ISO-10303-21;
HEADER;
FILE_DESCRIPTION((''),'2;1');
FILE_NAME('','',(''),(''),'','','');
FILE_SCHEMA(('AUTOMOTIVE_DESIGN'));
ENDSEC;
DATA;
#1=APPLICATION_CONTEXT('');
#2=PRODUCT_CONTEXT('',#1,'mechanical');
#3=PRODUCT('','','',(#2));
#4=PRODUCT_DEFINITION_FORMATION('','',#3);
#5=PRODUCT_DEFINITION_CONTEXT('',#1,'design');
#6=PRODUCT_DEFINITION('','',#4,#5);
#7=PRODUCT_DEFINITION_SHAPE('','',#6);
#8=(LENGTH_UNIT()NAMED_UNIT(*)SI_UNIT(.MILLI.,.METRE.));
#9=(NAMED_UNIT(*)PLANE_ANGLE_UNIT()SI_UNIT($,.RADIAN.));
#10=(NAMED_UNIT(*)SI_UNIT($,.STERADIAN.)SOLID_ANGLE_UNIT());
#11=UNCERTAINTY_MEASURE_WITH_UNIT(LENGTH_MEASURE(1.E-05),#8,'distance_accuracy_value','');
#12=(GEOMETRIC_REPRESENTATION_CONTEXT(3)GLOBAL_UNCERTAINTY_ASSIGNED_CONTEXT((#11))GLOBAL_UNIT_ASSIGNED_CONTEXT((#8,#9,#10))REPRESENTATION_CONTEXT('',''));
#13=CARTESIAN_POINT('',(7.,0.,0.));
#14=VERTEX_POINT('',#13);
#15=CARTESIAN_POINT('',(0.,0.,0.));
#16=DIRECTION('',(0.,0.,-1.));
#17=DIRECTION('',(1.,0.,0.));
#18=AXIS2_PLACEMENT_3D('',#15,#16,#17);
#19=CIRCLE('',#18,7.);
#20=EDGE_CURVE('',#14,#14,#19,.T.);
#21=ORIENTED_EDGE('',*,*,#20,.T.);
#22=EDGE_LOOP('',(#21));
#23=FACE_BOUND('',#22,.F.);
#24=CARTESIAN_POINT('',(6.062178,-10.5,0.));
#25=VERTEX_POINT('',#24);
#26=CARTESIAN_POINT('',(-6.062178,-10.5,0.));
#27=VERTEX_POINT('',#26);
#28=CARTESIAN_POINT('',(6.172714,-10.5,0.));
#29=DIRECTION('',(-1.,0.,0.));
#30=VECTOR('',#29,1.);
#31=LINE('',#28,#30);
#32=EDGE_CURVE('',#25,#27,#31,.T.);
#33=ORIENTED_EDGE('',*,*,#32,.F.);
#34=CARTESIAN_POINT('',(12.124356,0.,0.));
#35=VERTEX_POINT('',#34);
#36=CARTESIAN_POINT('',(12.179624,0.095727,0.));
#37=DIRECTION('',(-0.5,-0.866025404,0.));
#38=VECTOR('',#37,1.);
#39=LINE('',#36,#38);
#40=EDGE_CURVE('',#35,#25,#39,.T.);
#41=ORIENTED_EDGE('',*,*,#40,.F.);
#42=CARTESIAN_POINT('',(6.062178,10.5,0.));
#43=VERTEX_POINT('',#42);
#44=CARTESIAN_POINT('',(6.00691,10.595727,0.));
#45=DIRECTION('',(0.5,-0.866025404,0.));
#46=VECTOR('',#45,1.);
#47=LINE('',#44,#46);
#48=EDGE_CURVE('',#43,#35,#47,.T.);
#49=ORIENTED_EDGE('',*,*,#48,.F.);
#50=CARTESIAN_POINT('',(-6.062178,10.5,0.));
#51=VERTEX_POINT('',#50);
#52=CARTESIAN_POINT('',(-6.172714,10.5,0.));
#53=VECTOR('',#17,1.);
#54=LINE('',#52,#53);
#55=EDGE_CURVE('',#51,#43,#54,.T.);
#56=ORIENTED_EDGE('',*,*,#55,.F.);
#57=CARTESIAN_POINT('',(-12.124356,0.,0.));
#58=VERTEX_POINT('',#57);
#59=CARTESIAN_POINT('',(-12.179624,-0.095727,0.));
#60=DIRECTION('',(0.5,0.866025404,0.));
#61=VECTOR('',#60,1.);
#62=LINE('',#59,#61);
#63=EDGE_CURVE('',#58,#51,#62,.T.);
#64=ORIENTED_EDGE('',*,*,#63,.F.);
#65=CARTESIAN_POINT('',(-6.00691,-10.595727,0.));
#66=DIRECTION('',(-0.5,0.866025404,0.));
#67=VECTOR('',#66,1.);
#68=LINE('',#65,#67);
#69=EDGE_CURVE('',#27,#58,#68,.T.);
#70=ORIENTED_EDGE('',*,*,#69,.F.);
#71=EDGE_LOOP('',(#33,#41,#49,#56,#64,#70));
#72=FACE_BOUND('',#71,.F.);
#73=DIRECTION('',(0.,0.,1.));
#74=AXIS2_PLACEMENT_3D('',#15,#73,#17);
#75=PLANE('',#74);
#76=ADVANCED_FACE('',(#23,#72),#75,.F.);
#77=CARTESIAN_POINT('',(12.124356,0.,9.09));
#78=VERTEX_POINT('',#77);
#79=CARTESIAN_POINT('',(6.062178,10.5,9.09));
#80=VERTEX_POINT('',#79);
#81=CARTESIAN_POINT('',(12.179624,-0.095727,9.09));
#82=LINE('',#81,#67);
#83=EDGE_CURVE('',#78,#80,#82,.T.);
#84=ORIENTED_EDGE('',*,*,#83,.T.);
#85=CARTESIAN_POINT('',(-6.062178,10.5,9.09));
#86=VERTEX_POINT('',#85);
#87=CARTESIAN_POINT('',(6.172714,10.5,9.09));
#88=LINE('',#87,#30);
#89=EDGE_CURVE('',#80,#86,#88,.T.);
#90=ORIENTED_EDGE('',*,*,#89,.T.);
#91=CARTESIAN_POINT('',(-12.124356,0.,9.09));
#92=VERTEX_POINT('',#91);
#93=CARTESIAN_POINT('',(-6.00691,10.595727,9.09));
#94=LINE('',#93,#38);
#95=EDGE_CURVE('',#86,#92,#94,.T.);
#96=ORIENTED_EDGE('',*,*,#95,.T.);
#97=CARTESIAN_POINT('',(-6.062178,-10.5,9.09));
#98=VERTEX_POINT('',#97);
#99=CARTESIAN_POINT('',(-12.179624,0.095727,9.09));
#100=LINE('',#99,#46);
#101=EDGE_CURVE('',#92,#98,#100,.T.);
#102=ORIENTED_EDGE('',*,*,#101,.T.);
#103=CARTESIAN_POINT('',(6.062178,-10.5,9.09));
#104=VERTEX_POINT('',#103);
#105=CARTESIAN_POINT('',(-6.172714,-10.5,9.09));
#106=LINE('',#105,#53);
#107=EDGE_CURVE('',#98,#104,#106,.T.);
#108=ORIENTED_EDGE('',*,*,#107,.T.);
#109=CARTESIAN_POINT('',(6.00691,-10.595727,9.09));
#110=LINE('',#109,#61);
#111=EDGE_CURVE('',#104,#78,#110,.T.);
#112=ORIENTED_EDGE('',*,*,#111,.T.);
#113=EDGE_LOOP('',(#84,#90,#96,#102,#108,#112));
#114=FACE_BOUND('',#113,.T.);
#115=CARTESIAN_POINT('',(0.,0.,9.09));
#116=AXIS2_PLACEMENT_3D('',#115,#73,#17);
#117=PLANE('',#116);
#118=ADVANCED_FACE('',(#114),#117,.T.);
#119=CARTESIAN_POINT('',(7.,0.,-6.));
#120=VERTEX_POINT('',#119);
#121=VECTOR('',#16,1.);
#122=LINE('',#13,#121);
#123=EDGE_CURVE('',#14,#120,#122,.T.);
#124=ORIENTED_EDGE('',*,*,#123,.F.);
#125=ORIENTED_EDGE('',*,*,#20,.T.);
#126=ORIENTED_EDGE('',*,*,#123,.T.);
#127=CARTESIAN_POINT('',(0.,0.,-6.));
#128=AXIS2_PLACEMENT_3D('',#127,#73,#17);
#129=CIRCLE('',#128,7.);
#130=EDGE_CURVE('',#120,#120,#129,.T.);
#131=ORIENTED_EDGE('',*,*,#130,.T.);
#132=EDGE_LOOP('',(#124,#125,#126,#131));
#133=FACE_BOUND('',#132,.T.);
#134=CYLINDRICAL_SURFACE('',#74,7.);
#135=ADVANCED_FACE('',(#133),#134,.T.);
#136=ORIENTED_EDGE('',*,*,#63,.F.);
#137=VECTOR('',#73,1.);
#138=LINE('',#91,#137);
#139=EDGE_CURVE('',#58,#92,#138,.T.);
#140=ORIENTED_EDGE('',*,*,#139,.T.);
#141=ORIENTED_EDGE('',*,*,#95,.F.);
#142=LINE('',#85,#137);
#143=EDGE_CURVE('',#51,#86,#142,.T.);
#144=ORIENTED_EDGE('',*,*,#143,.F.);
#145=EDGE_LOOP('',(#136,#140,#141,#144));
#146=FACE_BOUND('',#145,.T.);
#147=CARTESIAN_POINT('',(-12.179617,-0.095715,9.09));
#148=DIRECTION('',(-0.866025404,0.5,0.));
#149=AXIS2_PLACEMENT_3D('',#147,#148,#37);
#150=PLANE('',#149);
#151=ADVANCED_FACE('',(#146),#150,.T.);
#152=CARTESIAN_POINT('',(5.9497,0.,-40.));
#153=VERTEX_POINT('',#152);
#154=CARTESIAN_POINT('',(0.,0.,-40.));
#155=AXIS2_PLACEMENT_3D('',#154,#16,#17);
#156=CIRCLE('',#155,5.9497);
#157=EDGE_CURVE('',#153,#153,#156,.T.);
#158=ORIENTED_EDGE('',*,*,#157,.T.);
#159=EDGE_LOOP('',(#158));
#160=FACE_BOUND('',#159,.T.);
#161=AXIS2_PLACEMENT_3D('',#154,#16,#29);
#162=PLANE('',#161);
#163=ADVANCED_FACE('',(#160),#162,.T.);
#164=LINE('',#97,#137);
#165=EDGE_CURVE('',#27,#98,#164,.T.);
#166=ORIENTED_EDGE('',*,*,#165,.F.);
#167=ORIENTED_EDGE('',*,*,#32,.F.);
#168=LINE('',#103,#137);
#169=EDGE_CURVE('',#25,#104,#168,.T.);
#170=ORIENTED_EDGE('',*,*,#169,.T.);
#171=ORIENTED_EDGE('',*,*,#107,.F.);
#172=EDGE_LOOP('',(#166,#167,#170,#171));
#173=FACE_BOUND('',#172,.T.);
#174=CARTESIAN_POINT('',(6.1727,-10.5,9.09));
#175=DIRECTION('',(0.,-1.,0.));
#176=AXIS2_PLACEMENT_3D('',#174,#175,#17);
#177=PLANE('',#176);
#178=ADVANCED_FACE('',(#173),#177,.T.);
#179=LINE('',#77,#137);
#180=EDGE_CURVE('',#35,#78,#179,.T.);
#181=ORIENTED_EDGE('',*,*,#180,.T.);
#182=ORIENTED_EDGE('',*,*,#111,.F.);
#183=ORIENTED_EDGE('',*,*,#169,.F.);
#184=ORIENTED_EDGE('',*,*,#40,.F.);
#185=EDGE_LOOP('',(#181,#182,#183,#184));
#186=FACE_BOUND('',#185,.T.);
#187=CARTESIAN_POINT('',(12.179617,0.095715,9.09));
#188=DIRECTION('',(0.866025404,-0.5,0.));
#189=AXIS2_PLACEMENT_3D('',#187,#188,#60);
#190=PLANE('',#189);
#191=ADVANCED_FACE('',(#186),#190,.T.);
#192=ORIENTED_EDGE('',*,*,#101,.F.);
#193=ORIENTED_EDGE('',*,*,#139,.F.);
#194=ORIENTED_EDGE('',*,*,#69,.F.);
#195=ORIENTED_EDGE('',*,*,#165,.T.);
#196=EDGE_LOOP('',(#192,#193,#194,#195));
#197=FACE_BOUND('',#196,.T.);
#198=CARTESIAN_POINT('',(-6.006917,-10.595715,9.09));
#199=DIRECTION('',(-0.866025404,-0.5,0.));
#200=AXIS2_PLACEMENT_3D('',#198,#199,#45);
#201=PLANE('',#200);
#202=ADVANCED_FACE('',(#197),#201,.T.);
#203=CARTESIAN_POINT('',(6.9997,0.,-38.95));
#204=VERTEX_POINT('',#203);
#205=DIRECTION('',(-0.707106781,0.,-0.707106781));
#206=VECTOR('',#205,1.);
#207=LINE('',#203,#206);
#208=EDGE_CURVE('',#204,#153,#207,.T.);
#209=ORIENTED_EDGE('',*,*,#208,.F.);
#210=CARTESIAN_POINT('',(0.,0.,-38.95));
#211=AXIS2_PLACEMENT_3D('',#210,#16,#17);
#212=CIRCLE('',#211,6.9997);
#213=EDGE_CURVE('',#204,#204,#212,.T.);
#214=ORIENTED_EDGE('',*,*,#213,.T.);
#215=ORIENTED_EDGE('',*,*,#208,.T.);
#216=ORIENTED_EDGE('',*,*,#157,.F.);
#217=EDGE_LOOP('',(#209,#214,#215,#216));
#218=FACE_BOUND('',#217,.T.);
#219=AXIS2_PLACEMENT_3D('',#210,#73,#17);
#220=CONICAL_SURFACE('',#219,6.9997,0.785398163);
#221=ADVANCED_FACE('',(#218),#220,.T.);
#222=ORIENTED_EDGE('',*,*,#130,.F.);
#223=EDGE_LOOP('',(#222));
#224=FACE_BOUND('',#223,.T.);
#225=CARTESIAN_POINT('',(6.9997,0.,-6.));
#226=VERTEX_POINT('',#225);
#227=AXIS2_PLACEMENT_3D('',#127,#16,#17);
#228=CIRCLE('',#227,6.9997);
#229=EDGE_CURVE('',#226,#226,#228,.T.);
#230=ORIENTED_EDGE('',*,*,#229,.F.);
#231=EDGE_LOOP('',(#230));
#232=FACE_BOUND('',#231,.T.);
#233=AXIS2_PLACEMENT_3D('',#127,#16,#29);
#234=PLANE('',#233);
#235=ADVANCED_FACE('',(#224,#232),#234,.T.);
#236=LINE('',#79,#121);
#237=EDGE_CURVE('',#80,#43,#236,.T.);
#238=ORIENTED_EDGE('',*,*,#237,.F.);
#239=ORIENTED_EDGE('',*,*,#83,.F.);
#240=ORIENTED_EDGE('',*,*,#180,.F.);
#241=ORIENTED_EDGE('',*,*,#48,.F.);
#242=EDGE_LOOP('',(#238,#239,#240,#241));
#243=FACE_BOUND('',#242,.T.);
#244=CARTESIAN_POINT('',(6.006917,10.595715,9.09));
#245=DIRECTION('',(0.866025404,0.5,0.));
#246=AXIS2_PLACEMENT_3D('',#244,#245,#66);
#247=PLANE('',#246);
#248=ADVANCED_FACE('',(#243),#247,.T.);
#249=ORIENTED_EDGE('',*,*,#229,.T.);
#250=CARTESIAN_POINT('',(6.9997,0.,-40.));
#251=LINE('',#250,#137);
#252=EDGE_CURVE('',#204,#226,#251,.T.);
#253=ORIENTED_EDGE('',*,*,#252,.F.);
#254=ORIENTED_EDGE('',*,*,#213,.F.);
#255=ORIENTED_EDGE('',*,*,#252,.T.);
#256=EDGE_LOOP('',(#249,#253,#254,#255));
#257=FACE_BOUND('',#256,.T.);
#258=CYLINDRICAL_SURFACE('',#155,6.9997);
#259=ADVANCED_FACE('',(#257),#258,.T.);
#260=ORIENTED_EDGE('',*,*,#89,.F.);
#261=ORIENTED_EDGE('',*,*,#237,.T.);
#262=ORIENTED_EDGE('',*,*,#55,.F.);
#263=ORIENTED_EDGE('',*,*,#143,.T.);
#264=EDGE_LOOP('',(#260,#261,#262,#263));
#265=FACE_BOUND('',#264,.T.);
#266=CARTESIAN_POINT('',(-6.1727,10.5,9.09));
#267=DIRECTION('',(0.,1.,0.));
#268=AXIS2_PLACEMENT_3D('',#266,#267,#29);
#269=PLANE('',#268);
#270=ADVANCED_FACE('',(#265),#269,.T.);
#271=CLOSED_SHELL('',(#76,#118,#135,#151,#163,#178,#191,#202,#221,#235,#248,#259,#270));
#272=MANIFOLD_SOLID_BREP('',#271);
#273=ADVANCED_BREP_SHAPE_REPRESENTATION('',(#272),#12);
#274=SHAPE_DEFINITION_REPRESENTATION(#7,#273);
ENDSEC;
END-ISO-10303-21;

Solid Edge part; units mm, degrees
sketch "Sketch1" plane through (0, 0, 0) normal (0, 0, 1) x (1, 0, 0)
  circle A0 centre (0, 0) radius 12.18
  dimension "D1" = 24.36
extrude "Protrusion1" add sketch "Sketch1" along normal blind 9.09
sketch "Sketch2" plane through (0, 0, 0) normal (0, 0, -1) x (1, 0, 0)
  circle A0 centre (0, 0) radius 7
extrude "Protrusion2" add sketch "Sketch2" along normal blind 40
sketch "Sketch3" plane through (0, 0, -40) normal (0, 0, -1) x (1, 0, 0)
  circle A0 centre (0, 0) radius 6.9997
extrude "Cutout1" cut sketch "Sketch3" against normal blind 34 flip side to cut
chamfer "Chamfer_1" distance 1.05 angle 45 1 edges at (-6.9997, 0, -40)
sketch "Sketch4" plane through (0, 0, 9.09) normal (0, 0, 1) x (1, 0, 0)
  line L0 (-6.1727, 10.5) -> (6.1727, 10.5)
  dimension "D1" = 21
extrude "Cutout2" cut sketch "Sketch4" against normal up to next material side at (0, 10.55, 9.09)
pattern_circular "Pattern1" count 6 over 360 about axis through (0, 0, 9.09) along (0, 0, 1) of "Cutout2"
properties part number "24102684"
